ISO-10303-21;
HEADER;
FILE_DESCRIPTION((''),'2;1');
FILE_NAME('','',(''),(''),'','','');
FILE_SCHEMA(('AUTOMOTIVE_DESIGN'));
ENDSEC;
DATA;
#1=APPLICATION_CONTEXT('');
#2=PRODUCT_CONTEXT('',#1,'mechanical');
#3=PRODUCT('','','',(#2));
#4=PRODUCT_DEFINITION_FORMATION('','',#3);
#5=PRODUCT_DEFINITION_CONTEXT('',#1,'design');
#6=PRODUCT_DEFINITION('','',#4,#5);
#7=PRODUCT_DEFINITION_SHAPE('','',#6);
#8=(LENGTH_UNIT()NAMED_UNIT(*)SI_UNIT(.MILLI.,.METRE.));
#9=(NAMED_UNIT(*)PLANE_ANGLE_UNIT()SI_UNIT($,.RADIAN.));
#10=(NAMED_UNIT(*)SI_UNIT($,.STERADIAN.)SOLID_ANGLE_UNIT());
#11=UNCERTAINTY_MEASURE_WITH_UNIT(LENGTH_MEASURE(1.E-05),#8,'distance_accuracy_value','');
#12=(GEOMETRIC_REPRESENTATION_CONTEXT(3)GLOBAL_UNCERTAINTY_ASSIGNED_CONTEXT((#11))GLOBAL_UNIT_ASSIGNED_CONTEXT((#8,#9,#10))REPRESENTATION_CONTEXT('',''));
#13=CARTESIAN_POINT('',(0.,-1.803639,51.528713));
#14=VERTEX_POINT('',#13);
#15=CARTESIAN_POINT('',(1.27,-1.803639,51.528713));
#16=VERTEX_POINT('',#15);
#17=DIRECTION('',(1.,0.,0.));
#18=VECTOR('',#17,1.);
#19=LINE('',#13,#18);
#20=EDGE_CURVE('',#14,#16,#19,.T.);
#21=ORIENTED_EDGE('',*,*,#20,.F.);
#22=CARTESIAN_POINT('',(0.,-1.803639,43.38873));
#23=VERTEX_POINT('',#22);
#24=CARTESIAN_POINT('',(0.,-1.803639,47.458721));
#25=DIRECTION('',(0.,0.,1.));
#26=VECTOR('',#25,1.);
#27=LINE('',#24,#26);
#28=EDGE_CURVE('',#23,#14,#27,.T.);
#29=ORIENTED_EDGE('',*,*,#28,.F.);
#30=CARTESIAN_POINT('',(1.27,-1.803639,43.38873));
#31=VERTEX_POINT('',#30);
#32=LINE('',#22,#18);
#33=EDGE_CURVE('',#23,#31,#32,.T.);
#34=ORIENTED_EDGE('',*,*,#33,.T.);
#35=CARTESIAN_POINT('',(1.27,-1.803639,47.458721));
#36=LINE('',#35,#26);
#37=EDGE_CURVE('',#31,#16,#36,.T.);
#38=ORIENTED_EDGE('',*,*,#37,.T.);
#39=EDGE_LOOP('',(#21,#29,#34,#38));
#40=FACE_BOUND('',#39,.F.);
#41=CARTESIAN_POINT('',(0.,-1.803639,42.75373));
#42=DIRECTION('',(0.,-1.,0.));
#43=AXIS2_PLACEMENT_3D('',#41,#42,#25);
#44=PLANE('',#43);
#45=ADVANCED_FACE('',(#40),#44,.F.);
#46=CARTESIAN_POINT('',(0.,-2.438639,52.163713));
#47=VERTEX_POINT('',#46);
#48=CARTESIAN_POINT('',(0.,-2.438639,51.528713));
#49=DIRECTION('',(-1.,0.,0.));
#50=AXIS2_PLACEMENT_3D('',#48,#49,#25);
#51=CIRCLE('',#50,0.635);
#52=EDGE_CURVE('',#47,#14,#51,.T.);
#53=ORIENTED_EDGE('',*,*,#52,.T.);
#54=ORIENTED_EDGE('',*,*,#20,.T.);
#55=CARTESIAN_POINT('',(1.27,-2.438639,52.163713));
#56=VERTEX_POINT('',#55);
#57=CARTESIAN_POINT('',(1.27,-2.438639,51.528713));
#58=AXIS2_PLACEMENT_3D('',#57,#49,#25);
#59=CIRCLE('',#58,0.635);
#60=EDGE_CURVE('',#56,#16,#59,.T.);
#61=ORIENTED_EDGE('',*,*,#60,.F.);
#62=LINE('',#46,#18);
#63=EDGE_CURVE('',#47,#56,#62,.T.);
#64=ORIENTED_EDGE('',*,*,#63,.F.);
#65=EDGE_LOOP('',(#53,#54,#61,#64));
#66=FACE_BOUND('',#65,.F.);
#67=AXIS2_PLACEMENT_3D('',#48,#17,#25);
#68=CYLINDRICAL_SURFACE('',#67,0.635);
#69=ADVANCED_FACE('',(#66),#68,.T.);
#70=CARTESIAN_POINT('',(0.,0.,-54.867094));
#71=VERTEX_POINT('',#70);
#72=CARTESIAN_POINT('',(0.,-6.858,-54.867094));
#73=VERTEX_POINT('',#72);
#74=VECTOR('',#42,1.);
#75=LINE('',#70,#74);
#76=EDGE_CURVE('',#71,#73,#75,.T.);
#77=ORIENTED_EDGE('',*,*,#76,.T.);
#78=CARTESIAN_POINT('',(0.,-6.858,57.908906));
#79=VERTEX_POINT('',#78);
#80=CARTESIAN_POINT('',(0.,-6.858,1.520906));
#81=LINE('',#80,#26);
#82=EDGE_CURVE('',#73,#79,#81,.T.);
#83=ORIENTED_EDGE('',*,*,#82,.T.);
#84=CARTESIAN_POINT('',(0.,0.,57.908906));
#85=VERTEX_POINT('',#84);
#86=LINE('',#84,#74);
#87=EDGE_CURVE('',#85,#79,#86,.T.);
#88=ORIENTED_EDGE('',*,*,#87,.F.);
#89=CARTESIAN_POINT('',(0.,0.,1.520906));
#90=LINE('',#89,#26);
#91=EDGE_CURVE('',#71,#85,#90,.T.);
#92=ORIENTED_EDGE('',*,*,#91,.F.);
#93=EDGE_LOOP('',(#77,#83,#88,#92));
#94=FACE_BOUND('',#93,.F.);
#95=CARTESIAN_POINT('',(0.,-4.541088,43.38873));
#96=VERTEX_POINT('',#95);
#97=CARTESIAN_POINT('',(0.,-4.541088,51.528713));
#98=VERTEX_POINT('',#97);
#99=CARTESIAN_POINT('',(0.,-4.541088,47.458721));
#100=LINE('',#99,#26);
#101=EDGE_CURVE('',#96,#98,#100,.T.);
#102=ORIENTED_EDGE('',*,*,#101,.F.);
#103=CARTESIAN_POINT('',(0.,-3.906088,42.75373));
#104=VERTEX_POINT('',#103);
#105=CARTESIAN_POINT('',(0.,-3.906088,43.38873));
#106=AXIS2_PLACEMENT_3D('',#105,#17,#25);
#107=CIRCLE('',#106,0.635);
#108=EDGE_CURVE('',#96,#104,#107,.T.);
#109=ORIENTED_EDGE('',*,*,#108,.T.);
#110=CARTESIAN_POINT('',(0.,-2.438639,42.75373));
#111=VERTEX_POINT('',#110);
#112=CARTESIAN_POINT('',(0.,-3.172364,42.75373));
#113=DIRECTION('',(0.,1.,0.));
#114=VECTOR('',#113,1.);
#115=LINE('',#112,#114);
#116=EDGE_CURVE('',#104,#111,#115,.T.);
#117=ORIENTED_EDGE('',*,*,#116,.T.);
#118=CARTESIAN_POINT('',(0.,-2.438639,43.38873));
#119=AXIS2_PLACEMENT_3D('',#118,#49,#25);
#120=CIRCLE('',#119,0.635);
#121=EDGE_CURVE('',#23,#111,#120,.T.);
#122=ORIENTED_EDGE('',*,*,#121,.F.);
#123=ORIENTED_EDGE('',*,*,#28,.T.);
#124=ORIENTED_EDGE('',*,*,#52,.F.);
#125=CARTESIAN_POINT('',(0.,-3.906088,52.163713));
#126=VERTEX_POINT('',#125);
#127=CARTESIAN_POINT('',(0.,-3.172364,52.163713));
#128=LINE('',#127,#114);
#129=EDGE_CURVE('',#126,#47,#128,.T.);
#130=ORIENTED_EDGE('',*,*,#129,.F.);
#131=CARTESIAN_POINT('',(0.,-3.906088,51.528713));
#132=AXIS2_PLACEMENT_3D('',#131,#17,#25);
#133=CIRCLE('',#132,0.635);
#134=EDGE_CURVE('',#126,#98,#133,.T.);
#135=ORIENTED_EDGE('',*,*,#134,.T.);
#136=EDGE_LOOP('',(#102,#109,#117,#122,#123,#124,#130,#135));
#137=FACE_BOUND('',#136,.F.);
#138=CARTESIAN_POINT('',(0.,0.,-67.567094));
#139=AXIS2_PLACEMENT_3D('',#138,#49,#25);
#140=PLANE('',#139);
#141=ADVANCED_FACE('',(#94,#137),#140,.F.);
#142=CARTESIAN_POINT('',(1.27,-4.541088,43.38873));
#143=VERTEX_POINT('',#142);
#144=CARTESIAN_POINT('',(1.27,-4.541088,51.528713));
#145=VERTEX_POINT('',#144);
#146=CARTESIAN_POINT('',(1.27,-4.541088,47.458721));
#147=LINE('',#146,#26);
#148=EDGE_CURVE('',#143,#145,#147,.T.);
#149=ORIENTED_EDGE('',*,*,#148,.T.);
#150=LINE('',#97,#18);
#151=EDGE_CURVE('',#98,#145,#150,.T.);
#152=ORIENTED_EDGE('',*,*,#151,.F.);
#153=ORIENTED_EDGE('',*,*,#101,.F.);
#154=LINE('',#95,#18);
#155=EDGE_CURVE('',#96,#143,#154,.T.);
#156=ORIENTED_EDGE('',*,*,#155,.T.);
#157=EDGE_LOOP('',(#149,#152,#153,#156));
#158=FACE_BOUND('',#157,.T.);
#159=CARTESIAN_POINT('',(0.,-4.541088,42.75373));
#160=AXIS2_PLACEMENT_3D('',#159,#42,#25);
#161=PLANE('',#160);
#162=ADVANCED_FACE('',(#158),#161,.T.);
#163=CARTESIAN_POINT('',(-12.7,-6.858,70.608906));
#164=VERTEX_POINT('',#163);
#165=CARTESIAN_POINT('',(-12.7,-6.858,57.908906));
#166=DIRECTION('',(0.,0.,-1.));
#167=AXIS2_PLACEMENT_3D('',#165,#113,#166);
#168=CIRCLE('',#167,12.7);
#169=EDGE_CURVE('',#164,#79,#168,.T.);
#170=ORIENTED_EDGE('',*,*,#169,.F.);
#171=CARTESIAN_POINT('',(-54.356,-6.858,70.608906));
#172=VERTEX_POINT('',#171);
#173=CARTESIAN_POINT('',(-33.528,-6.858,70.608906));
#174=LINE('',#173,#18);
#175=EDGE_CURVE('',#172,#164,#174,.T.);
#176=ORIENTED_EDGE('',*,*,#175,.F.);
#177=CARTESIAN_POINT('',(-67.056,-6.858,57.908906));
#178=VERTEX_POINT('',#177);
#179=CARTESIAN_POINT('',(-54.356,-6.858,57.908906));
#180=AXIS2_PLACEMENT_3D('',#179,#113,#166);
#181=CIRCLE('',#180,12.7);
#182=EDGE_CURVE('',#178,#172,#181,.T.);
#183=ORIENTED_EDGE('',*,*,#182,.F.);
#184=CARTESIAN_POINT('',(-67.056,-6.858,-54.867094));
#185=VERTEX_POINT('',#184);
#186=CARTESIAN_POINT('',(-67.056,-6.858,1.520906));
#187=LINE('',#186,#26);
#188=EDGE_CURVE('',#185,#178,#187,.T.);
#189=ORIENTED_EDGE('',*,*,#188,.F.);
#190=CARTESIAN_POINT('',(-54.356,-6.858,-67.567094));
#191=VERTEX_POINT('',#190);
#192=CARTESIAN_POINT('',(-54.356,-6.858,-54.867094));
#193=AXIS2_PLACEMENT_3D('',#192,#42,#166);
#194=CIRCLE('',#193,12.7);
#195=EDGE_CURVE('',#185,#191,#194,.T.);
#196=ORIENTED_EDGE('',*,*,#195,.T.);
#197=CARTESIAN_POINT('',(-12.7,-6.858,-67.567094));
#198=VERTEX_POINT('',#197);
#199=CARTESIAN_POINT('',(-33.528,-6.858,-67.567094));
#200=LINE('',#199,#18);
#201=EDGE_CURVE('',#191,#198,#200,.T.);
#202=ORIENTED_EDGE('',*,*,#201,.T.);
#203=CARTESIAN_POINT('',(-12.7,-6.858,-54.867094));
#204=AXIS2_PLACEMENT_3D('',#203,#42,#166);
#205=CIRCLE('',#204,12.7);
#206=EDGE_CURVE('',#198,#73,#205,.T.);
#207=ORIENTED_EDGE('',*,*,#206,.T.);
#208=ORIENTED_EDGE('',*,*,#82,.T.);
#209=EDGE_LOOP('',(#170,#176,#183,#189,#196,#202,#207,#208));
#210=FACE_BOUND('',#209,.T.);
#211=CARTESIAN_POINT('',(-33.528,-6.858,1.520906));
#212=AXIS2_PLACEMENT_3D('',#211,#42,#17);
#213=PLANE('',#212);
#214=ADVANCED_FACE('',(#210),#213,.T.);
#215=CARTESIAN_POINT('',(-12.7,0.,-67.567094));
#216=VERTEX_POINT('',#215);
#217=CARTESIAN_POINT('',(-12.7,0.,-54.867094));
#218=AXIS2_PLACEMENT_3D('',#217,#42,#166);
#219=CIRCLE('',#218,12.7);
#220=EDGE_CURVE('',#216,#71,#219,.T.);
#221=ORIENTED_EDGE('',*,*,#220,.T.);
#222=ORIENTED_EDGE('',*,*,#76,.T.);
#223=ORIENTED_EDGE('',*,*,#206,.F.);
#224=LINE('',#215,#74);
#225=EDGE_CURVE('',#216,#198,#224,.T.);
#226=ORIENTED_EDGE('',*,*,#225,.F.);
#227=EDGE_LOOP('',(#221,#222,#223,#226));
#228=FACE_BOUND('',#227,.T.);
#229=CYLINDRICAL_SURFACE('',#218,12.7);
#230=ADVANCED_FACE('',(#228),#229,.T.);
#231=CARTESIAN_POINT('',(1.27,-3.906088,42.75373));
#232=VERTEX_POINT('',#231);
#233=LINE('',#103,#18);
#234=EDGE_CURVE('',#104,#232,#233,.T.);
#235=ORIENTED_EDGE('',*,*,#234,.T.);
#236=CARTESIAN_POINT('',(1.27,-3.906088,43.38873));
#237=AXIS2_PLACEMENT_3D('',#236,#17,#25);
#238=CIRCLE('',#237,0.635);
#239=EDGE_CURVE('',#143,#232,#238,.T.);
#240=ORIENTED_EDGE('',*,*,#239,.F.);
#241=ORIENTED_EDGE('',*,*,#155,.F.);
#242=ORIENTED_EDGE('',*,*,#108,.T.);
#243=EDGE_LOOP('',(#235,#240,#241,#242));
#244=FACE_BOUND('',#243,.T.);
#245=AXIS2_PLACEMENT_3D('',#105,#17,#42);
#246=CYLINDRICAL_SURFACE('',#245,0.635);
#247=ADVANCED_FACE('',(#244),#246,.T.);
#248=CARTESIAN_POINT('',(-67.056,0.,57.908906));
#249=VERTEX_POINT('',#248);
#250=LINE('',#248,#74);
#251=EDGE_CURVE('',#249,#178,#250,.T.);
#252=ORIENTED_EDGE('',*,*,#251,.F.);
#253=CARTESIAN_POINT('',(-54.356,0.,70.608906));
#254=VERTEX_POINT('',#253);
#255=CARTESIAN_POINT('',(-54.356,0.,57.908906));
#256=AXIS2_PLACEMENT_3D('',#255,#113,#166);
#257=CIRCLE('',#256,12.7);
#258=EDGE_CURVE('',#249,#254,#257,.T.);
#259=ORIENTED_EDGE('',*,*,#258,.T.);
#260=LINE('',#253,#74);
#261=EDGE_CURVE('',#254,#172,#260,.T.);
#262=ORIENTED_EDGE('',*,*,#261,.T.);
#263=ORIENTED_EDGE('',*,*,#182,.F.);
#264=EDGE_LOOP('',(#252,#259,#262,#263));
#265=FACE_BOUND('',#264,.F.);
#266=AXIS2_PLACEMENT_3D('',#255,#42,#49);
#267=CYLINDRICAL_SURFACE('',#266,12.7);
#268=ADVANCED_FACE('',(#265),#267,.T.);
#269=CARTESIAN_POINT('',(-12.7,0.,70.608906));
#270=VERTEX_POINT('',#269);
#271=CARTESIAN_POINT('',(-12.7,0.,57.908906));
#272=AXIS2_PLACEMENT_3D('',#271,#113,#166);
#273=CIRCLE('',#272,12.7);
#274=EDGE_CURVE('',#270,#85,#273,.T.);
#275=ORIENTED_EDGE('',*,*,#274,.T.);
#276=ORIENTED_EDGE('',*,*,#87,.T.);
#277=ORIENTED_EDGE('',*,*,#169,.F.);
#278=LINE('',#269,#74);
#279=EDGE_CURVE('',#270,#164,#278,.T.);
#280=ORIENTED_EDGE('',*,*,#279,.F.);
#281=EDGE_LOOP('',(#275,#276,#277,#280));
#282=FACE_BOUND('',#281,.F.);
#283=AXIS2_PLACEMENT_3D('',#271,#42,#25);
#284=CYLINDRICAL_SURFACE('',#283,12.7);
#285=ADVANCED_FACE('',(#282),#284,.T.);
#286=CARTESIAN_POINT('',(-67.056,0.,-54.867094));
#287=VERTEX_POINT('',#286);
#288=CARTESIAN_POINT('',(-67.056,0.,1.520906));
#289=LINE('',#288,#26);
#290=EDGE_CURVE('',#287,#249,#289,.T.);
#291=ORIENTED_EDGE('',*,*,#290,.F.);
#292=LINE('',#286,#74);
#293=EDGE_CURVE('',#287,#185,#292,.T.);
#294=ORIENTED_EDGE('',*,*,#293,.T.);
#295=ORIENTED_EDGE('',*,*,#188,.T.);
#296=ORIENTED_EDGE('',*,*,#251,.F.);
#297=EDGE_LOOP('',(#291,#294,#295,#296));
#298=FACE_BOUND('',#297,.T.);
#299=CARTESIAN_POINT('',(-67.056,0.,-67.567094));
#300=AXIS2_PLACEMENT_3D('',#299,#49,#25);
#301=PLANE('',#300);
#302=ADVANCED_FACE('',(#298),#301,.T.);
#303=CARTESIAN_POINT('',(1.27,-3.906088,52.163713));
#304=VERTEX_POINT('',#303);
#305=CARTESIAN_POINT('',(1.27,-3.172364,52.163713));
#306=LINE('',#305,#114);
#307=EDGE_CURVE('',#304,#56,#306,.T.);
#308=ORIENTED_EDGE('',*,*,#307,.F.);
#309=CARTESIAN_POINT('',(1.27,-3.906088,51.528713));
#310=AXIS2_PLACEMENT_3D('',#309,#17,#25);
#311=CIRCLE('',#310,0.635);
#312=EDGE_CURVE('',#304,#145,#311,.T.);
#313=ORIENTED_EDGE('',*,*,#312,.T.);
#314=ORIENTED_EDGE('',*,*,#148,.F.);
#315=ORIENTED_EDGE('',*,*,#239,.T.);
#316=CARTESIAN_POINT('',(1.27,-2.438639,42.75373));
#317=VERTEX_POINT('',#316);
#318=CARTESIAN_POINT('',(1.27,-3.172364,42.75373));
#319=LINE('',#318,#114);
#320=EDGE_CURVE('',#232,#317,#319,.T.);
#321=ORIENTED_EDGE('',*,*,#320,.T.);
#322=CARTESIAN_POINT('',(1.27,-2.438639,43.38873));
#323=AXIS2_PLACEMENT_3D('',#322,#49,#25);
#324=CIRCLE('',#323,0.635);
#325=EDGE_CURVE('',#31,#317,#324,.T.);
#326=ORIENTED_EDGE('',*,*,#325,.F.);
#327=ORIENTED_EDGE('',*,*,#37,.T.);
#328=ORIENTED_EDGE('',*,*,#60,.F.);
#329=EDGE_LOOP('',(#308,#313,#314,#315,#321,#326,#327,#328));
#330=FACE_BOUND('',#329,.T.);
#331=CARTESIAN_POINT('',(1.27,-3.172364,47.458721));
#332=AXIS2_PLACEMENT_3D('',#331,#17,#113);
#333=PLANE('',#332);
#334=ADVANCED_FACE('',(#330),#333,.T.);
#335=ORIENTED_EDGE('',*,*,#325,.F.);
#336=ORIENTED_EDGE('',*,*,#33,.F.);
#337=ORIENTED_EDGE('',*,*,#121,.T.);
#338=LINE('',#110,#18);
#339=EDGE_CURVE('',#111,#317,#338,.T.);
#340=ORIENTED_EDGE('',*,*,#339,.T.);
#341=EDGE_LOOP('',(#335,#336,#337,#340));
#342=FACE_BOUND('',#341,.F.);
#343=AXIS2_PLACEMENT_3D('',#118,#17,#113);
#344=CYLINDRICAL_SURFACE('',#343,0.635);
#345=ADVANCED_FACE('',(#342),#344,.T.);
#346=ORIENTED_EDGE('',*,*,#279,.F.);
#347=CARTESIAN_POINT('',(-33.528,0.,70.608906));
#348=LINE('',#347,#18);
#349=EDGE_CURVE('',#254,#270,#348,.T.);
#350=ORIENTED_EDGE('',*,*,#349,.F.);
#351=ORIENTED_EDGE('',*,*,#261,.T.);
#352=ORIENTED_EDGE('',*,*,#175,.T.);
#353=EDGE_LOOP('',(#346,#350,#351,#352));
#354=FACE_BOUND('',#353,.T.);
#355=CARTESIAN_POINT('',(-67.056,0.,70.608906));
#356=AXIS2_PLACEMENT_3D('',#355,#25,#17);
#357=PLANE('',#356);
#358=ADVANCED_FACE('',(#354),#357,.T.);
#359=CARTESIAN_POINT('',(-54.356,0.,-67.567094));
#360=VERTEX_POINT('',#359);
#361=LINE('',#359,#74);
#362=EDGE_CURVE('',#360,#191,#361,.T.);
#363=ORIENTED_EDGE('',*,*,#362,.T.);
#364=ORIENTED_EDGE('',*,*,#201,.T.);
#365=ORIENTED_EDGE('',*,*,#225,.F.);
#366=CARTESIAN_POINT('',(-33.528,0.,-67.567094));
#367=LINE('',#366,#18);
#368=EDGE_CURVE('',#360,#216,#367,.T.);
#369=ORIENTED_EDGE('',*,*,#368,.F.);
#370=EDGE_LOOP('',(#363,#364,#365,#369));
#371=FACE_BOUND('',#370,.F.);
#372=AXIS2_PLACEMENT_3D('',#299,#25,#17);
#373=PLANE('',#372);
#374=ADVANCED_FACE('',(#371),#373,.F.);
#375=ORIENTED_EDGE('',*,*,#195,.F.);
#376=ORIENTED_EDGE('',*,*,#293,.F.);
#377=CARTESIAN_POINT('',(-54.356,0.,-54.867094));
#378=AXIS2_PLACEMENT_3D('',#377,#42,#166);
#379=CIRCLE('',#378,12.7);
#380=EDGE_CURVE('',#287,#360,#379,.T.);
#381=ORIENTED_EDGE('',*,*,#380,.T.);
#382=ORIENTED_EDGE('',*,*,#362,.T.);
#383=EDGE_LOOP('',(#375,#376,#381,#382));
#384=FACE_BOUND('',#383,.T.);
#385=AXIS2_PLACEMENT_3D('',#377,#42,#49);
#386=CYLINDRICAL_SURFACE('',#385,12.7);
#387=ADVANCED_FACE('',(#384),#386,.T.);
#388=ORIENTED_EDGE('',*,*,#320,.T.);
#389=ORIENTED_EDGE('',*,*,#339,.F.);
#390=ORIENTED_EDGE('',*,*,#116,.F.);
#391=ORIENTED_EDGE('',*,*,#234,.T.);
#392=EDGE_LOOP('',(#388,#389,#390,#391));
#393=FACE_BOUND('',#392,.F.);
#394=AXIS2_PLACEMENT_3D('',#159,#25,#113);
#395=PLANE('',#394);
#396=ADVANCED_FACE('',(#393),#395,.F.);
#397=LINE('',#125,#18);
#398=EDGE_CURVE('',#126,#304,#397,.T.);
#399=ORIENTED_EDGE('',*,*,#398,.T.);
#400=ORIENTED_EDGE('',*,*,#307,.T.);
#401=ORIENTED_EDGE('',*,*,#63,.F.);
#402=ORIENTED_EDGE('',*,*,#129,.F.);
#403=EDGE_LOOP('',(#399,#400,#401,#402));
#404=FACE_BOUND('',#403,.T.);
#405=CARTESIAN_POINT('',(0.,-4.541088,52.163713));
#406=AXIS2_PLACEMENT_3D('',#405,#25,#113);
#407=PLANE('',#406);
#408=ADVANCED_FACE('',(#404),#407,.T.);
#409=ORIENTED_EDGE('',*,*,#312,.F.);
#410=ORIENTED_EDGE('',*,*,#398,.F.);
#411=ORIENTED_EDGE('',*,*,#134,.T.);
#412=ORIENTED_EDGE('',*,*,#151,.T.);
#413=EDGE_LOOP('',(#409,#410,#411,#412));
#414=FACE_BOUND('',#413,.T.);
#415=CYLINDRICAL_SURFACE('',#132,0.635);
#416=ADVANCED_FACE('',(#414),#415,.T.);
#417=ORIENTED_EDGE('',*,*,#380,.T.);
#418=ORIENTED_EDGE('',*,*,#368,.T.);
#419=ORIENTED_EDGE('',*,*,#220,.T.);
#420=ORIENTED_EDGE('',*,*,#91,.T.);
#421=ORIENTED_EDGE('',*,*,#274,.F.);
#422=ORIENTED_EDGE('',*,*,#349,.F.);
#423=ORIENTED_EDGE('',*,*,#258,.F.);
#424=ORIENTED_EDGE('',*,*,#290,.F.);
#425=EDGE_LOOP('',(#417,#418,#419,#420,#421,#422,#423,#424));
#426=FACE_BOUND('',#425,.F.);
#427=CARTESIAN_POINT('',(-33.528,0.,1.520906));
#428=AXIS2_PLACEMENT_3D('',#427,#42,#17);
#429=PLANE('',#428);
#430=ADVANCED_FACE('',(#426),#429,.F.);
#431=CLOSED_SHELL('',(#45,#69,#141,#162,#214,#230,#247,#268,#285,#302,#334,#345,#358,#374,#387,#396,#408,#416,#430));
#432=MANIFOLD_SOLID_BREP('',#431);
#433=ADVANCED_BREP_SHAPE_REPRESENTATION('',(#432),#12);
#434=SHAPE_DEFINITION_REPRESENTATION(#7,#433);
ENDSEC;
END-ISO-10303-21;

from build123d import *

# Parameters (mm, degrees)
F0_W     = 67.056
F0_H     = 138.176
F1_DEPTH = 6.858
F2_R     = 12.7
F3_R     = 12.7
F4_R     = 12.7
F5_R     = 12.7
F8_W     = 2.7374484343
F8_H     = 9.4099827111
F9_DEPTH = 1.27
F10_R    = 0.635
F11_R    = 0.635
F12_R    = 0.635
F13_R    = 0.635


# Not quite as in the source:
# - the program builds the solid bodies; features that only make, move or delete a surface that nothing else refers to are left out


with BuildPart() as f1:
    # F0 (on Front) → F1 (new body)
    with BuildSketch(Plane.XZ):
        with Locations((-33.528, 1.5209056576)):
            Rectangle(F0_W, F0_H)
    extrude(amount=F1_DEPTH)

    # F2
    f2_edges = [f1.edges().sort_by_distance(p)[0] for p in [
        (-67.056, -3.429, 70.608906),
    ]]
    fillet(f2_edges, radius=F2_R)

    # F3
    f3_edges = [f1.edges().sort_by_distance(p)[0] for p in [
        (0, -3.429, 70.608906),
    ]]
    fillet(f3_edges, radius=F3_R)

    # F4
    f4_edges = [f1.edges().sort_by_distance(p)[0] for p in [
        (-67.056, -3.429, -67.567094),
    ]]
    fillet(f4_edges, radius=F4_R)

    # F5
    f5_edges = [f1.edges().sort_by_distance(p)[0] for p in [
        (0, -3.429, -67.567094),
    ]]
    fillet(f5_edges, radius=F5_R)

    # F8 (on face) → F9 (join)
    with BuildSketch(Plane.YZ):
        with Locations((-3.1723636785, 47.4587213248)):
            Rectangle(F8_W, F8_H)
    extrude(amount=F9_DEPTH)

    # F10
    f10_edges = [f1.edges().sort_by_distance(p)[0] for p in [
        (0.635, -1.803639, 52.163713),
    ]]
    fillet(f10_edges, radius=F10_R)

    # F11
    f11_edges = [f1.edges().sort_by_distance(p)[0] for p in [
        (0.635, -1.803639, 42.75373),
    ]]
    fillet(f11_edges, radius=F11_R)

    # F12
    f12_edges = [f1.edges().sort_by_distance(p)[0] for p in [
        (0.635, -4.541088, 52.163713),
    ]]
    fillet(f12_edges, radius=F12_R)

    # F13
    f13_edges = [f1.edges().sort_by_distance(p)[0] for p in [
        (0.635, -4.541088, 42.75373),
    ]]
    fillet(f13_edges, radius=F13_R)


solid = f1.part
